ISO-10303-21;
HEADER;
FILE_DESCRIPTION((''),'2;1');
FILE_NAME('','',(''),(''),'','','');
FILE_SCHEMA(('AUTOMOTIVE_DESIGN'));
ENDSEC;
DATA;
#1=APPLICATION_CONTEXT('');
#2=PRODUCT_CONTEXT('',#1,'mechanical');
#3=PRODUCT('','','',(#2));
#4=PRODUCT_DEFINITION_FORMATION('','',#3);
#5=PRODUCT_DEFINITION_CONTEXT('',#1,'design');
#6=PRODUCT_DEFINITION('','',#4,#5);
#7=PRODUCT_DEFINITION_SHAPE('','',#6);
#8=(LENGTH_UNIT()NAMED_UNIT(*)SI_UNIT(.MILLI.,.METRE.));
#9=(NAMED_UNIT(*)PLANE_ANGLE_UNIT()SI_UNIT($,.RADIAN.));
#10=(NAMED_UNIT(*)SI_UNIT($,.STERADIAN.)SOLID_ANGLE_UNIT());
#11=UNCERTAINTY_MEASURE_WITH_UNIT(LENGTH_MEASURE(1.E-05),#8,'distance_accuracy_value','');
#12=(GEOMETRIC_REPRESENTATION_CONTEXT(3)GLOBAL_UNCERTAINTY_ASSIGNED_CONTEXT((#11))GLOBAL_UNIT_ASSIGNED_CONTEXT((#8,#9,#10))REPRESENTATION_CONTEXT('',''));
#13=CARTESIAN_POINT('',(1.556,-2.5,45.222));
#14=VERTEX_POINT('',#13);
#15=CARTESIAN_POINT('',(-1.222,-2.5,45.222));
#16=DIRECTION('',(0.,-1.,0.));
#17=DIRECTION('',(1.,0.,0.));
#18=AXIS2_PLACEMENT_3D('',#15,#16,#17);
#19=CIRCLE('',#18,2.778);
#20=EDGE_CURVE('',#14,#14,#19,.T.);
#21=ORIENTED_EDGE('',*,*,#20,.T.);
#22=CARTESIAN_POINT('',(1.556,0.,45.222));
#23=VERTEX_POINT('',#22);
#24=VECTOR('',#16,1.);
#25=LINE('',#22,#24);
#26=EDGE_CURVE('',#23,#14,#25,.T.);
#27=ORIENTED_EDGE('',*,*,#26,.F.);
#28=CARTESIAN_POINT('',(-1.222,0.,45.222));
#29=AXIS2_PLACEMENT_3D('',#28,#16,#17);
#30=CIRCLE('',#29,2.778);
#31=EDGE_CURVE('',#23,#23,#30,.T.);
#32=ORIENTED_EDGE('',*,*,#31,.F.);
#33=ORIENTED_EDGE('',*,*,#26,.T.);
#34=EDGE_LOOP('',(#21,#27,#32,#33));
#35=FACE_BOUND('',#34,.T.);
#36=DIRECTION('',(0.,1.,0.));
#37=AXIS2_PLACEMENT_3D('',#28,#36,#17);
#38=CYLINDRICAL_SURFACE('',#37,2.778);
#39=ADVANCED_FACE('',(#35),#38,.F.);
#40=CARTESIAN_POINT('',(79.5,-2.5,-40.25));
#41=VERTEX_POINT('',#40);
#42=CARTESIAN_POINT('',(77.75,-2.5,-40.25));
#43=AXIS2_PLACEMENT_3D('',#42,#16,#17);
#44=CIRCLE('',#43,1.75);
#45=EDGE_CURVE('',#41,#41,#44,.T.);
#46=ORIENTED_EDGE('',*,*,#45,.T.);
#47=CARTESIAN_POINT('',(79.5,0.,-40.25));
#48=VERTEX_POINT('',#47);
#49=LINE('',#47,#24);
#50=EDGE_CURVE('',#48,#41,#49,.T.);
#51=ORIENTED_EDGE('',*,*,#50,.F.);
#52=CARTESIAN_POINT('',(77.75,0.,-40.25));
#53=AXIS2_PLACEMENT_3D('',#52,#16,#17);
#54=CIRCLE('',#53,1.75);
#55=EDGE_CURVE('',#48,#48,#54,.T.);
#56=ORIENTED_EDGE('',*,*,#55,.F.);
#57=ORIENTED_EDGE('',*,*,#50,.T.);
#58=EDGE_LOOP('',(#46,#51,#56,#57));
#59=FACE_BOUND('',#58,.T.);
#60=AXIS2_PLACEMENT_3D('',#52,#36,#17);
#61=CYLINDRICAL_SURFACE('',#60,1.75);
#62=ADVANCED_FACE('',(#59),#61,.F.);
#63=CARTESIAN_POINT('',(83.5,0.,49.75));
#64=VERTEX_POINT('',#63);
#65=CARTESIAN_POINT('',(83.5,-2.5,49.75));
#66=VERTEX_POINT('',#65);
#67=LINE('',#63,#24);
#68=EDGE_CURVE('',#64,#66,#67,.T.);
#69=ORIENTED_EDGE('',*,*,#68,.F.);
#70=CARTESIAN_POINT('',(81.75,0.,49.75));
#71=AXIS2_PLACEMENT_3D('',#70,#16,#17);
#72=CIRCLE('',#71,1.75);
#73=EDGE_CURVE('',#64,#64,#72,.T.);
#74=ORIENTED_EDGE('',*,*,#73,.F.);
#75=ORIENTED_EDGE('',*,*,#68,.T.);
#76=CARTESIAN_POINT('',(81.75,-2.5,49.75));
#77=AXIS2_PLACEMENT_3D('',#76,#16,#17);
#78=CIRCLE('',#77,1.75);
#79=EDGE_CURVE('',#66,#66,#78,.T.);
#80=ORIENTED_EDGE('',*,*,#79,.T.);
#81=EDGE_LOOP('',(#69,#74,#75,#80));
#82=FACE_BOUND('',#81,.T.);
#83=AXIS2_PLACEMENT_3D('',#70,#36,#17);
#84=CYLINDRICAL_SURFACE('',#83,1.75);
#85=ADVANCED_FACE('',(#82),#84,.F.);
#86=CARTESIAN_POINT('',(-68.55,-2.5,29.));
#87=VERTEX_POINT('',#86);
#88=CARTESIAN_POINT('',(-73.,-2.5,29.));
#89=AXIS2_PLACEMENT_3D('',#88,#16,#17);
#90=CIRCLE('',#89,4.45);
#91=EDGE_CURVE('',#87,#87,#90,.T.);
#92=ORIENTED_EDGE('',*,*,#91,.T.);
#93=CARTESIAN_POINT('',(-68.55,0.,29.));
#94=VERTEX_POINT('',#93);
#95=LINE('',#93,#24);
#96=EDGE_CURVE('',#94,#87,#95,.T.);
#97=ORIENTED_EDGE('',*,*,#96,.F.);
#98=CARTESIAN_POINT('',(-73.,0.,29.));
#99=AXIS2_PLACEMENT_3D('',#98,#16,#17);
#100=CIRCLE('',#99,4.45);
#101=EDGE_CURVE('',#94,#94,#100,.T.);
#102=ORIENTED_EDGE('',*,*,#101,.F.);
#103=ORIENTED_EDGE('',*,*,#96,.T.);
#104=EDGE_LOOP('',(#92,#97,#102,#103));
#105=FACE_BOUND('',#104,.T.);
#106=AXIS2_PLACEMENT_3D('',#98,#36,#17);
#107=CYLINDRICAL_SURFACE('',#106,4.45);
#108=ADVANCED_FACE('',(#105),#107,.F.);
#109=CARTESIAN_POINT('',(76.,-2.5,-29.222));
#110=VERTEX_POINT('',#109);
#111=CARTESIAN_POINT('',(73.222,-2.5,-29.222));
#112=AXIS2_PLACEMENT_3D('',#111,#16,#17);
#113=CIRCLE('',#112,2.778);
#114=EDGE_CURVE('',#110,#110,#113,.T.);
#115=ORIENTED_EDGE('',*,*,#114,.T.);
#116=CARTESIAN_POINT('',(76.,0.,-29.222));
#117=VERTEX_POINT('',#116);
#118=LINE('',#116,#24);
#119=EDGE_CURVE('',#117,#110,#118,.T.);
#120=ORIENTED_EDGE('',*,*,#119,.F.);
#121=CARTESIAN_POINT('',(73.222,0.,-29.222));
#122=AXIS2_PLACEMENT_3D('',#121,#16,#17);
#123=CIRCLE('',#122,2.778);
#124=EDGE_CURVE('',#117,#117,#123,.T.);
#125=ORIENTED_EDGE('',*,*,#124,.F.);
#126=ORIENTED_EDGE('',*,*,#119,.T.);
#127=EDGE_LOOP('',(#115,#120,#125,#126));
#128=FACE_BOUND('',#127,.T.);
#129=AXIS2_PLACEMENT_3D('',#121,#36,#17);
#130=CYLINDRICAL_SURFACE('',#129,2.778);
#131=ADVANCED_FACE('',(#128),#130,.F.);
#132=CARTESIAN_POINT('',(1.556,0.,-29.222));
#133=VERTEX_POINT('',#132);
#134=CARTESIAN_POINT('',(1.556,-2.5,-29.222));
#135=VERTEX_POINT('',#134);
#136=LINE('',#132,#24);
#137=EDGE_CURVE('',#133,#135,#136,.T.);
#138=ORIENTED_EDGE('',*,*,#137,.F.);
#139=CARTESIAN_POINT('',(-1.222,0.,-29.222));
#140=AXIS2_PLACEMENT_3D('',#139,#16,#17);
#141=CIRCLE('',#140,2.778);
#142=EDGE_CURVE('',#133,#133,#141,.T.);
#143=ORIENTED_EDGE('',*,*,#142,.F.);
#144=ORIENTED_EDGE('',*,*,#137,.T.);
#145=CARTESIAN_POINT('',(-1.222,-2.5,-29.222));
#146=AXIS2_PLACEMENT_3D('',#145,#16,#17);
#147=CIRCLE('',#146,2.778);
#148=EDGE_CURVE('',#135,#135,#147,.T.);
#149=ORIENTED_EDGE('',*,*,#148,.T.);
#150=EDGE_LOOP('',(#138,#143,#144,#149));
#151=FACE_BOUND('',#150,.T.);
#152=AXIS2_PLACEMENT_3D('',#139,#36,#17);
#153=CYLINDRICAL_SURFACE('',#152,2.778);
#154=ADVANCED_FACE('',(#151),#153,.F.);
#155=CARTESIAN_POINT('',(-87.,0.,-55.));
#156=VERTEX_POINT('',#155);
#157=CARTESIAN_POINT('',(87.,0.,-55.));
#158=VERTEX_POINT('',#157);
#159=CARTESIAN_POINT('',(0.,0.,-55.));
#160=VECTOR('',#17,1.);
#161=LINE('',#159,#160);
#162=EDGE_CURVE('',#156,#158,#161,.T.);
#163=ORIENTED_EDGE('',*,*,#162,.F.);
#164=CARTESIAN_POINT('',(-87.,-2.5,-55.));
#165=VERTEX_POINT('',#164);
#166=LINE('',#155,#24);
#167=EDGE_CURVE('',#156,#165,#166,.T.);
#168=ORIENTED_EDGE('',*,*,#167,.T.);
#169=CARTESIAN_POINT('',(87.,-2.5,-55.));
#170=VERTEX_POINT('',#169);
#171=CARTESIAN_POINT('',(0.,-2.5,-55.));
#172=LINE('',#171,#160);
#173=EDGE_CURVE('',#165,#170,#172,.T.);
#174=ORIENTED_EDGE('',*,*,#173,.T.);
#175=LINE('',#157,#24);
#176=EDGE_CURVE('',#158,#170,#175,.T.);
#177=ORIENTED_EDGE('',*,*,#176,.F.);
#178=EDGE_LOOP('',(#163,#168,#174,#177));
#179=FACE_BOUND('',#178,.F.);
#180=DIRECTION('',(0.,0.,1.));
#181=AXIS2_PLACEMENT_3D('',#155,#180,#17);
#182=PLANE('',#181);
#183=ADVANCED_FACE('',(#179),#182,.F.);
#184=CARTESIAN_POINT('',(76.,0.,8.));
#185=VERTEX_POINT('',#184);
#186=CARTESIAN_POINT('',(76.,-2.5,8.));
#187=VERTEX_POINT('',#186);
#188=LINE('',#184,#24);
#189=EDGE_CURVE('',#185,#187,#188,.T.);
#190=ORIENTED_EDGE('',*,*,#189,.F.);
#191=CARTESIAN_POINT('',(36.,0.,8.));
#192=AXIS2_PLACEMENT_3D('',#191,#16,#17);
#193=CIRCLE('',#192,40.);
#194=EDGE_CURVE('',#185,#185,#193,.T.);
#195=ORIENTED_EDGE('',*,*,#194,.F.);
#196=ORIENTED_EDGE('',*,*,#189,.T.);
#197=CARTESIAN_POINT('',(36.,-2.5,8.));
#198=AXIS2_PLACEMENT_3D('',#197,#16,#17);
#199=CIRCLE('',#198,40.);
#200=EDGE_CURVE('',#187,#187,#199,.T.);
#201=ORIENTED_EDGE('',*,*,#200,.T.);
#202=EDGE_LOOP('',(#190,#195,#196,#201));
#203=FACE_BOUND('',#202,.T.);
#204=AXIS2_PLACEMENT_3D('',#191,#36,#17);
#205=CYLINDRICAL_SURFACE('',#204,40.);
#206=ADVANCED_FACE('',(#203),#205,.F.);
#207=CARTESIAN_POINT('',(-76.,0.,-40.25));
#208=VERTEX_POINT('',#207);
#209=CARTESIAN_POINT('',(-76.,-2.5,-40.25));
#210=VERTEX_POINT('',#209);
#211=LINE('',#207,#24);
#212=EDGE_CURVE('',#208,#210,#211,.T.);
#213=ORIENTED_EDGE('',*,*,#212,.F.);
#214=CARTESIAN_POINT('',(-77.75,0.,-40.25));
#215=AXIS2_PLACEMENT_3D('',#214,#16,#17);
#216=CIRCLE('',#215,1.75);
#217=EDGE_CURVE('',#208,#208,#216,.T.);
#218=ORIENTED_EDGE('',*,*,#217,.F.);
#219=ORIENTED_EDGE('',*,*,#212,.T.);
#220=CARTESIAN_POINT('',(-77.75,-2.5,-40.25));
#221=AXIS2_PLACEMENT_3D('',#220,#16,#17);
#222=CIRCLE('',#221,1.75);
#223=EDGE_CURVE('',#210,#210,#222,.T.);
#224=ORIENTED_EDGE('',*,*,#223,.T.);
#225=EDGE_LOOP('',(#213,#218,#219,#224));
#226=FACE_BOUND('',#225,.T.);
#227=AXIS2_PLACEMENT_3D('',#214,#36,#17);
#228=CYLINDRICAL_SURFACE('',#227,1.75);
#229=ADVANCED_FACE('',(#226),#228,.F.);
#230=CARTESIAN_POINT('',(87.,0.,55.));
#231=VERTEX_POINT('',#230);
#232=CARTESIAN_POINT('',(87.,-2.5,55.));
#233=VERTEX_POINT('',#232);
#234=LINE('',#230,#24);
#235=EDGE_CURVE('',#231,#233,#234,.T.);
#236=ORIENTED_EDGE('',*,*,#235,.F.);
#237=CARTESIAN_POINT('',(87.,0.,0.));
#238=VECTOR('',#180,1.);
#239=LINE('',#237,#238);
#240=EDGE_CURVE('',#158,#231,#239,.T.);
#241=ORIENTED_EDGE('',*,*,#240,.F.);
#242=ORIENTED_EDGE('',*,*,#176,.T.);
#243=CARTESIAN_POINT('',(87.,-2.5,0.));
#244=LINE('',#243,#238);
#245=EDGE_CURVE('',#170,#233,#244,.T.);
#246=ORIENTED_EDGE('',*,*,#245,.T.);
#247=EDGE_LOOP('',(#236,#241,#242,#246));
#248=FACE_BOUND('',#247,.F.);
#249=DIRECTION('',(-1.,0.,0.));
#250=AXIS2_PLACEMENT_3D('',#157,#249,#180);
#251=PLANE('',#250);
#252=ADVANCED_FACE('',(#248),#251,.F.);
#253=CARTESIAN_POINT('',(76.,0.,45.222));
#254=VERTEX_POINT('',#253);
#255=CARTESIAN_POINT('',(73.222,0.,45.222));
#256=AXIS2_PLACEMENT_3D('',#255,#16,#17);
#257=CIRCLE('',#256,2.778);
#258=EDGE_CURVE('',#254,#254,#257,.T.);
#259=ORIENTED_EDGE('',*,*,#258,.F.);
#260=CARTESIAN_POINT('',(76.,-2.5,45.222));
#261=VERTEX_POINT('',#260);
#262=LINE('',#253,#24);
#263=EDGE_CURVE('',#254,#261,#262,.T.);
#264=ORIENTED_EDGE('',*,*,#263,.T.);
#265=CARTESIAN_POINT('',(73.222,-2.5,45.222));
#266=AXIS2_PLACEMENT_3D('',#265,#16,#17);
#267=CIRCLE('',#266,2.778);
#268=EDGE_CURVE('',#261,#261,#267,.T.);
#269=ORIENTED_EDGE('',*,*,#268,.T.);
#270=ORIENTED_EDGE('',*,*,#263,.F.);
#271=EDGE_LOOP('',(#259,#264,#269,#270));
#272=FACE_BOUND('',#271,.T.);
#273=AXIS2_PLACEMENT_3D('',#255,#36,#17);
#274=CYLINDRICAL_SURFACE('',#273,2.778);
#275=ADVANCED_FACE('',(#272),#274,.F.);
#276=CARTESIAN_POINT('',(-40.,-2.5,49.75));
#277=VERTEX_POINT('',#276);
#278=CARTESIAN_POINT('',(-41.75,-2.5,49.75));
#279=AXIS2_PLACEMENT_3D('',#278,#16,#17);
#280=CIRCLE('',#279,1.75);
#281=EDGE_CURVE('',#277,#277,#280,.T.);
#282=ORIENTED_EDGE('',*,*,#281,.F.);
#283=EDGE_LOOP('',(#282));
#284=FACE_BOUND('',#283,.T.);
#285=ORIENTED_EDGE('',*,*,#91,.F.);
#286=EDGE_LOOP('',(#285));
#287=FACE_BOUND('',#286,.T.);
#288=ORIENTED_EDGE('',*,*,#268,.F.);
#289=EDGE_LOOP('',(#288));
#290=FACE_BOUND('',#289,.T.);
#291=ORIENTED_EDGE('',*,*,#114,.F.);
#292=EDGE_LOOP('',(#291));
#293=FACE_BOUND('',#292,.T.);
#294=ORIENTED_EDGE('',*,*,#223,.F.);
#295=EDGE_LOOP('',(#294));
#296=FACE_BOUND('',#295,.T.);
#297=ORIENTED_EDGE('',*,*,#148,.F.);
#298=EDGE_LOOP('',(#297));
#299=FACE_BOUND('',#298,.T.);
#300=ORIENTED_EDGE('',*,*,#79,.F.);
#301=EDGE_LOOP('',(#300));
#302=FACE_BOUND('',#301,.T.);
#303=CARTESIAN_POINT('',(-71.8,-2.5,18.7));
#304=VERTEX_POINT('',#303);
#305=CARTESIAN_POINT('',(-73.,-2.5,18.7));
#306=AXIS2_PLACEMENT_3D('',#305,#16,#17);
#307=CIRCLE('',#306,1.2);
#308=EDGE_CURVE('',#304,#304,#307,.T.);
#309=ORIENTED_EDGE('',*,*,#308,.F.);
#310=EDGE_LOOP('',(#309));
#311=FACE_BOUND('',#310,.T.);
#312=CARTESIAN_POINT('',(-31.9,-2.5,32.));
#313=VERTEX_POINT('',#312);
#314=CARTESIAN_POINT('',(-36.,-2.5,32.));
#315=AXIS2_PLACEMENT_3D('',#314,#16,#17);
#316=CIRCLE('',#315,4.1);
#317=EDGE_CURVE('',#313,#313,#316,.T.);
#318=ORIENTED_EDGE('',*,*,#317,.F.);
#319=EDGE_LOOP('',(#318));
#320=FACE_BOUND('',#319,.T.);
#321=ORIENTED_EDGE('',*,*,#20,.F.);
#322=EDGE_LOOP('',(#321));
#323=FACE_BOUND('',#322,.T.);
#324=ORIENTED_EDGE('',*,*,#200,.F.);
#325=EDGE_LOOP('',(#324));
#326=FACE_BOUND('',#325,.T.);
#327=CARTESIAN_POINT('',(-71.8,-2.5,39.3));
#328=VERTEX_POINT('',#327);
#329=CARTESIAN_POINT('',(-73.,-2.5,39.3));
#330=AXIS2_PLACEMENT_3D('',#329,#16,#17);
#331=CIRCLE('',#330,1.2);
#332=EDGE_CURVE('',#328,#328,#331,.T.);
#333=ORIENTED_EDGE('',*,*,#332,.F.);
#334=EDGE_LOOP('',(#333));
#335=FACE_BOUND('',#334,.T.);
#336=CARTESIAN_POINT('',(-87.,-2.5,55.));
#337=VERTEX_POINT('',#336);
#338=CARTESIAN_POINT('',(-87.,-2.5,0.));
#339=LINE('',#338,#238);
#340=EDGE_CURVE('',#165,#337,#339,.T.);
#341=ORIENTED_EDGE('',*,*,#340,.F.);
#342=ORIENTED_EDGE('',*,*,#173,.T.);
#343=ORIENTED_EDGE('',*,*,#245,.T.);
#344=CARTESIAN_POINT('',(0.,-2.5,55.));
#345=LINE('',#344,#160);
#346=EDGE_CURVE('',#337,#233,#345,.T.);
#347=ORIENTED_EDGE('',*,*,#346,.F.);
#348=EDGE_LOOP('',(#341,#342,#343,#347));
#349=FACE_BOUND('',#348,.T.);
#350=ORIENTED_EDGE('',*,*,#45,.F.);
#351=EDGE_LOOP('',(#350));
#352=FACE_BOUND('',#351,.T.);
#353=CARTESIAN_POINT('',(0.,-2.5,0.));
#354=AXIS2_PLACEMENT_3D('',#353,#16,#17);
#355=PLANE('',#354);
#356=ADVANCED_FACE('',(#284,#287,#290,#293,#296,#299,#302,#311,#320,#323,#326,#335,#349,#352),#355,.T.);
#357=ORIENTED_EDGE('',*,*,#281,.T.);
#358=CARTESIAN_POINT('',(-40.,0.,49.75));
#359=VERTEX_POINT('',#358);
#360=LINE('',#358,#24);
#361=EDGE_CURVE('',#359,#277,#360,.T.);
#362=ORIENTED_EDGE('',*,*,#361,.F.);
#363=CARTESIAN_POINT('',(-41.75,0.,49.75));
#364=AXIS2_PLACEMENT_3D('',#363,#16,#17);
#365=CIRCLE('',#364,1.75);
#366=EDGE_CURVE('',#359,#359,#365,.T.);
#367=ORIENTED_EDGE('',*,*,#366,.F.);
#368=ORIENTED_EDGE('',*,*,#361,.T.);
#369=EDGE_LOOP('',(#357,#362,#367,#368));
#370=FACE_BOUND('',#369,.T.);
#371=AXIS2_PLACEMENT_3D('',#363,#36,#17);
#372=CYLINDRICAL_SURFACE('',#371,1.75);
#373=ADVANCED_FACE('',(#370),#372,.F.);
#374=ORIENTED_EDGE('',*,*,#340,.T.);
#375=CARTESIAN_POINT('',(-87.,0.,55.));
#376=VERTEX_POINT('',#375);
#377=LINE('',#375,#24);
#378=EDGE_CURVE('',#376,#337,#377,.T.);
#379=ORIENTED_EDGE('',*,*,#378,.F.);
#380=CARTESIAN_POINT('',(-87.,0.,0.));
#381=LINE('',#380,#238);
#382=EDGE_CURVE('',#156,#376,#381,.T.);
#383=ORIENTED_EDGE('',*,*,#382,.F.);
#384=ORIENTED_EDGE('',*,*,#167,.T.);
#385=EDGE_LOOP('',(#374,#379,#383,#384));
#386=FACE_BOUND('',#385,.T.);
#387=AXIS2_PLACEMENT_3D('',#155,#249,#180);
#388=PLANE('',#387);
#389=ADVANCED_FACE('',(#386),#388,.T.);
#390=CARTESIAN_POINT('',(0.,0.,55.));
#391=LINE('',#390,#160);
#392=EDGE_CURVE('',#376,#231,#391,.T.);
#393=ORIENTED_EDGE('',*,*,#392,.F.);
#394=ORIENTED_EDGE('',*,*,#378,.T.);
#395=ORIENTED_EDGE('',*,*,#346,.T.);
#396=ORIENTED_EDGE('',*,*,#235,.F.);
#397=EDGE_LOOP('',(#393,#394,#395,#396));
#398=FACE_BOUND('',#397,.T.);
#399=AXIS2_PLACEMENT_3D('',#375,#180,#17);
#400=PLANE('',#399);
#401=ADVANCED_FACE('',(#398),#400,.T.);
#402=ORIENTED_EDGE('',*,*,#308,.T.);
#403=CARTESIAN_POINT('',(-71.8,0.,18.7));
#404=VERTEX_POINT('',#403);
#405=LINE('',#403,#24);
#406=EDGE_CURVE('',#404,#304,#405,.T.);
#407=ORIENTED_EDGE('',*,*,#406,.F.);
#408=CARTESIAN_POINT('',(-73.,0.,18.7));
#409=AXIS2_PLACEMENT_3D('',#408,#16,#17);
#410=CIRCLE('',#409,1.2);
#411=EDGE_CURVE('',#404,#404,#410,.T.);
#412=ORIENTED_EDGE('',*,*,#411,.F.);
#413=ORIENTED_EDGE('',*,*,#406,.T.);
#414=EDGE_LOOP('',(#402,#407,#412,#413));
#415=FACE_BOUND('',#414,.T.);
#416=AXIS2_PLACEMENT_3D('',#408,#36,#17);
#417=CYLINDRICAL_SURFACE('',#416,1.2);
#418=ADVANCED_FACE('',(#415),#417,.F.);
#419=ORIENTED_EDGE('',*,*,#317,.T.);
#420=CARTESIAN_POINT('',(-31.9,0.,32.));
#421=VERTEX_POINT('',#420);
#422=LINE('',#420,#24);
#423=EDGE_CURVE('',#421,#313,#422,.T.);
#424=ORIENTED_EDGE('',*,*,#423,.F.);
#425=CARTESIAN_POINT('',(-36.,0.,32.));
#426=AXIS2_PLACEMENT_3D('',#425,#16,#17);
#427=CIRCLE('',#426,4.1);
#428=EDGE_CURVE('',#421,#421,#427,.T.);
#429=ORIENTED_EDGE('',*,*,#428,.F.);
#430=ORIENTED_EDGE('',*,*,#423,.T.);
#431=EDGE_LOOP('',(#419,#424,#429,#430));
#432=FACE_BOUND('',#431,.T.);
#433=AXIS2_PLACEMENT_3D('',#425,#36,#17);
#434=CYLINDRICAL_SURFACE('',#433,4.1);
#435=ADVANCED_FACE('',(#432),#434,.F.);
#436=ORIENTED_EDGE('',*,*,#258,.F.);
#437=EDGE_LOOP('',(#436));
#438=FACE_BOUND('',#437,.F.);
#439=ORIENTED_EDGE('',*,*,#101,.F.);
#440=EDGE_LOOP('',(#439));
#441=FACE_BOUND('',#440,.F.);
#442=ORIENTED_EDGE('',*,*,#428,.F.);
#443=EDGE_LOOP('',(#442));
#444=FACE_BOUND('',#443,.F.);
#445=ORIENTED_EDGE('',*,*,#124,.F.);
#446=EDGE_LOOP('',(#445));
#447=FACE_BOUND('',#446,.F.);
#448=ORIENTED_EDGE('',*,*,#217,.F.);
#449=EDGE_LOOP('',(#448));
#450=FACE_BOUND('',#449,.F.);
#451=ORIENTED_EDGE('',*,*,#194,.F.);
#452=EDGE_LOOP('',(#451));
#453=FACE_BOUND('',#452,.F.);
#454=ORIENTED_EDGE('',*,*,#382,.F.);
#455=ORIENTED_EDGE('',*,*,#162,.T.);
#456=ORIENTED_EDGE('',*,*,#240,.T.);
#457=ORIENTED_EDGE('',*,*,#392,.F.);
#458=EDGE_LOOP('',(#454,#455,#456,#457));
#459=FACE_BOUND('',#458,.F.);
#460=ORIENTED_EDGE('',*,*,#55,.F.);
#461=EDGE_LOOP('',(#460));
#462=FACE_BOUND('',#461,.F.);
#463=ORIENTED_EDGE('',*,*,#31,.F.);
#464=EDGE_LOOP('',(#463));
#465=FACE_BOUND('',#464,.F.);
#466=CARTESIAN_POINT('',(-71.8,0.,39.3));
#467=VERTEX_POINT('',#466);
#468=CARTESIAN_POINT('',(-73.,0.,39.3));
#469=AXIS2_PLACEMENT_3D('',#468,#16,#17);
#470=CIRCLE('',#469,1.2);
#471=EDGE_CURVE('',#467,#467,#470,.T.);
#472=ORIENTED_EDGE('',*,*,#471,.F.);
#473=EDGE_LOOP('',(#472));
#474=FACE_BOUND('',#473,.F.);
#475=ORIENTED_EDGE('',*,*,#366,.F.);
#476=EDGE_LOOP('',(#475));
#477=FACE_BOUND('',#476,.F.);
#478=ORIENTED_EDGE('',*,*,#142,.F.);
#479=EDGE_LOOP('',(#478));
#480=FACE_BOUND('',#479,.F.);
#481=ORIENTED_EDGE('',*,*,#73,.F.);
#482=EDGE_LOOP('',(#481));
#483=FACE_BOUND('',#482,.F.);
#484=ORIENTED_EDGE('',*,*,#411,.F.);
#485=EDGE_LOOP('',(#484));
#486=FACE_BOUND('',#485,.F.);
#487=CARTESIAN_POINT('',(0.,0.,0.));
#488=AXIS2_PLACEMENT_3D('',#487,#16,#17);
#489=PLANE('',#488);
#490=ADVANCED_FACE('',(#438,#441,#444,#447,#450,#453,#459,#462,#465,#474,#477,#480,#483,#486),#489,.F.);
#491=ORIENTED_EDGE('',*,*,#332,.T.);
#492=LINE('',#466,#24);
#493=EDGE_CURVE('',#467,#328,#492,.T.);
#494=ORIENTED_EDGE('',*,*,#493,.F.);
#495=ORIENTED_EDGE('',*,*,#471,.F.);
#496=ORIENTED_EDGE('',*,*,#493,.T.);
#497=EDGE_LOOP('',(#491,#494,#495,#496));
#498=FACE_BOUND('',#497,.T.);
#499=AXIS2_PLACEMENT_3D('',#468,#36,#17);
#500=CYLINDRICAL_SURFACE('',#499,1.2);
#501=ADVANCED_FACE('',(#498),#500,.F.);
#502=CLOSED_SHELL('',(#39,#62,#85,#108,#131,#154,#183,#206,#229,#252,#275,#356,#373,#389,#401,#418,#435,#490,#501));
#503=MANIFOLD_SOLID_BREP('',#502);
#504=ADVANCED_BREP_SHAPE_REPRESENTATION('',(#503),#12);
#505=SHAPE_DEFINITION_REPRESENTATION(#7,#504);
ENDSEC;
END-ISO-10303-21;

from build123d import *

# Parameters (mm, degrees)
F0_W     = 174
F0_H     = 110
F0_R     = 1.75
F0_R_2   = 2.778
F0_R_3   = 1.2
F0_R_4   = 4.45
F0_R_5   = 4.1
F0_R_6   = 40
F1_DEPTH = 2.5


# Not quite as in the source:
# - a feature names something its author has since deleted; it is built from what else it names


with BuildPart() as f1:
    # F0 (on Front) → F1 (new body)
    with BuildSketch(Plane.XZ):
        Rectangle(F0_W, F0_H)
        with Locations((-77.75, -40.25)):
            Circle(F0_R, mode=Mode.SUBTRACT)
        with Locations((-1.222, -29.222)):
            Circle(F0_R_2, mode=Mode.SUBTRACT)
        with Locations((77.75, -40.25)):
            Circle(F0_R, mode=Mode.SUBTRACT)
        with Locations((73.222, -29.222)):
            Circle(F0_R_2, mode=Mode.SUBTRACT)
        with Locations((-73, 18.7)):
            Circle(F0_R_3, mode=Mode.SUBTRACT)
        with Locations((-73, 29)):
            Circle(F0_R_4, mode=Mode.SUBTRACT)
        with Locations((-73, 39.3)):
            Circle(F0_R_3, mode=Mode.SUBTRACT)
        with Locations((-36, 32)):
            Circle(F0_R_5, mode=Mode.SUBTRACT)
        with Locations((-41.75, 49.75)):
            Circle(F0_R, mode=Mode.SUBTRACT)
        with Locations((-1.222, 45.222)):
            Circle(F0_R_2, mode=Mode.SUBTRACT)
        with Locations((36, 8)):
            Circle(F0_R_6, mode=Mode.SUBTRACT)
        with Locations((73.222, 45.222)):
            Circle(F0_R_2, mode=Mode.SUBTRACT)
        with Locations((81.75, 49.75)):
            Circle(F0_R, mode=Mode.SUBTRACT)
    extrude(amount=F1_DEPTH)


solid = f1.part
